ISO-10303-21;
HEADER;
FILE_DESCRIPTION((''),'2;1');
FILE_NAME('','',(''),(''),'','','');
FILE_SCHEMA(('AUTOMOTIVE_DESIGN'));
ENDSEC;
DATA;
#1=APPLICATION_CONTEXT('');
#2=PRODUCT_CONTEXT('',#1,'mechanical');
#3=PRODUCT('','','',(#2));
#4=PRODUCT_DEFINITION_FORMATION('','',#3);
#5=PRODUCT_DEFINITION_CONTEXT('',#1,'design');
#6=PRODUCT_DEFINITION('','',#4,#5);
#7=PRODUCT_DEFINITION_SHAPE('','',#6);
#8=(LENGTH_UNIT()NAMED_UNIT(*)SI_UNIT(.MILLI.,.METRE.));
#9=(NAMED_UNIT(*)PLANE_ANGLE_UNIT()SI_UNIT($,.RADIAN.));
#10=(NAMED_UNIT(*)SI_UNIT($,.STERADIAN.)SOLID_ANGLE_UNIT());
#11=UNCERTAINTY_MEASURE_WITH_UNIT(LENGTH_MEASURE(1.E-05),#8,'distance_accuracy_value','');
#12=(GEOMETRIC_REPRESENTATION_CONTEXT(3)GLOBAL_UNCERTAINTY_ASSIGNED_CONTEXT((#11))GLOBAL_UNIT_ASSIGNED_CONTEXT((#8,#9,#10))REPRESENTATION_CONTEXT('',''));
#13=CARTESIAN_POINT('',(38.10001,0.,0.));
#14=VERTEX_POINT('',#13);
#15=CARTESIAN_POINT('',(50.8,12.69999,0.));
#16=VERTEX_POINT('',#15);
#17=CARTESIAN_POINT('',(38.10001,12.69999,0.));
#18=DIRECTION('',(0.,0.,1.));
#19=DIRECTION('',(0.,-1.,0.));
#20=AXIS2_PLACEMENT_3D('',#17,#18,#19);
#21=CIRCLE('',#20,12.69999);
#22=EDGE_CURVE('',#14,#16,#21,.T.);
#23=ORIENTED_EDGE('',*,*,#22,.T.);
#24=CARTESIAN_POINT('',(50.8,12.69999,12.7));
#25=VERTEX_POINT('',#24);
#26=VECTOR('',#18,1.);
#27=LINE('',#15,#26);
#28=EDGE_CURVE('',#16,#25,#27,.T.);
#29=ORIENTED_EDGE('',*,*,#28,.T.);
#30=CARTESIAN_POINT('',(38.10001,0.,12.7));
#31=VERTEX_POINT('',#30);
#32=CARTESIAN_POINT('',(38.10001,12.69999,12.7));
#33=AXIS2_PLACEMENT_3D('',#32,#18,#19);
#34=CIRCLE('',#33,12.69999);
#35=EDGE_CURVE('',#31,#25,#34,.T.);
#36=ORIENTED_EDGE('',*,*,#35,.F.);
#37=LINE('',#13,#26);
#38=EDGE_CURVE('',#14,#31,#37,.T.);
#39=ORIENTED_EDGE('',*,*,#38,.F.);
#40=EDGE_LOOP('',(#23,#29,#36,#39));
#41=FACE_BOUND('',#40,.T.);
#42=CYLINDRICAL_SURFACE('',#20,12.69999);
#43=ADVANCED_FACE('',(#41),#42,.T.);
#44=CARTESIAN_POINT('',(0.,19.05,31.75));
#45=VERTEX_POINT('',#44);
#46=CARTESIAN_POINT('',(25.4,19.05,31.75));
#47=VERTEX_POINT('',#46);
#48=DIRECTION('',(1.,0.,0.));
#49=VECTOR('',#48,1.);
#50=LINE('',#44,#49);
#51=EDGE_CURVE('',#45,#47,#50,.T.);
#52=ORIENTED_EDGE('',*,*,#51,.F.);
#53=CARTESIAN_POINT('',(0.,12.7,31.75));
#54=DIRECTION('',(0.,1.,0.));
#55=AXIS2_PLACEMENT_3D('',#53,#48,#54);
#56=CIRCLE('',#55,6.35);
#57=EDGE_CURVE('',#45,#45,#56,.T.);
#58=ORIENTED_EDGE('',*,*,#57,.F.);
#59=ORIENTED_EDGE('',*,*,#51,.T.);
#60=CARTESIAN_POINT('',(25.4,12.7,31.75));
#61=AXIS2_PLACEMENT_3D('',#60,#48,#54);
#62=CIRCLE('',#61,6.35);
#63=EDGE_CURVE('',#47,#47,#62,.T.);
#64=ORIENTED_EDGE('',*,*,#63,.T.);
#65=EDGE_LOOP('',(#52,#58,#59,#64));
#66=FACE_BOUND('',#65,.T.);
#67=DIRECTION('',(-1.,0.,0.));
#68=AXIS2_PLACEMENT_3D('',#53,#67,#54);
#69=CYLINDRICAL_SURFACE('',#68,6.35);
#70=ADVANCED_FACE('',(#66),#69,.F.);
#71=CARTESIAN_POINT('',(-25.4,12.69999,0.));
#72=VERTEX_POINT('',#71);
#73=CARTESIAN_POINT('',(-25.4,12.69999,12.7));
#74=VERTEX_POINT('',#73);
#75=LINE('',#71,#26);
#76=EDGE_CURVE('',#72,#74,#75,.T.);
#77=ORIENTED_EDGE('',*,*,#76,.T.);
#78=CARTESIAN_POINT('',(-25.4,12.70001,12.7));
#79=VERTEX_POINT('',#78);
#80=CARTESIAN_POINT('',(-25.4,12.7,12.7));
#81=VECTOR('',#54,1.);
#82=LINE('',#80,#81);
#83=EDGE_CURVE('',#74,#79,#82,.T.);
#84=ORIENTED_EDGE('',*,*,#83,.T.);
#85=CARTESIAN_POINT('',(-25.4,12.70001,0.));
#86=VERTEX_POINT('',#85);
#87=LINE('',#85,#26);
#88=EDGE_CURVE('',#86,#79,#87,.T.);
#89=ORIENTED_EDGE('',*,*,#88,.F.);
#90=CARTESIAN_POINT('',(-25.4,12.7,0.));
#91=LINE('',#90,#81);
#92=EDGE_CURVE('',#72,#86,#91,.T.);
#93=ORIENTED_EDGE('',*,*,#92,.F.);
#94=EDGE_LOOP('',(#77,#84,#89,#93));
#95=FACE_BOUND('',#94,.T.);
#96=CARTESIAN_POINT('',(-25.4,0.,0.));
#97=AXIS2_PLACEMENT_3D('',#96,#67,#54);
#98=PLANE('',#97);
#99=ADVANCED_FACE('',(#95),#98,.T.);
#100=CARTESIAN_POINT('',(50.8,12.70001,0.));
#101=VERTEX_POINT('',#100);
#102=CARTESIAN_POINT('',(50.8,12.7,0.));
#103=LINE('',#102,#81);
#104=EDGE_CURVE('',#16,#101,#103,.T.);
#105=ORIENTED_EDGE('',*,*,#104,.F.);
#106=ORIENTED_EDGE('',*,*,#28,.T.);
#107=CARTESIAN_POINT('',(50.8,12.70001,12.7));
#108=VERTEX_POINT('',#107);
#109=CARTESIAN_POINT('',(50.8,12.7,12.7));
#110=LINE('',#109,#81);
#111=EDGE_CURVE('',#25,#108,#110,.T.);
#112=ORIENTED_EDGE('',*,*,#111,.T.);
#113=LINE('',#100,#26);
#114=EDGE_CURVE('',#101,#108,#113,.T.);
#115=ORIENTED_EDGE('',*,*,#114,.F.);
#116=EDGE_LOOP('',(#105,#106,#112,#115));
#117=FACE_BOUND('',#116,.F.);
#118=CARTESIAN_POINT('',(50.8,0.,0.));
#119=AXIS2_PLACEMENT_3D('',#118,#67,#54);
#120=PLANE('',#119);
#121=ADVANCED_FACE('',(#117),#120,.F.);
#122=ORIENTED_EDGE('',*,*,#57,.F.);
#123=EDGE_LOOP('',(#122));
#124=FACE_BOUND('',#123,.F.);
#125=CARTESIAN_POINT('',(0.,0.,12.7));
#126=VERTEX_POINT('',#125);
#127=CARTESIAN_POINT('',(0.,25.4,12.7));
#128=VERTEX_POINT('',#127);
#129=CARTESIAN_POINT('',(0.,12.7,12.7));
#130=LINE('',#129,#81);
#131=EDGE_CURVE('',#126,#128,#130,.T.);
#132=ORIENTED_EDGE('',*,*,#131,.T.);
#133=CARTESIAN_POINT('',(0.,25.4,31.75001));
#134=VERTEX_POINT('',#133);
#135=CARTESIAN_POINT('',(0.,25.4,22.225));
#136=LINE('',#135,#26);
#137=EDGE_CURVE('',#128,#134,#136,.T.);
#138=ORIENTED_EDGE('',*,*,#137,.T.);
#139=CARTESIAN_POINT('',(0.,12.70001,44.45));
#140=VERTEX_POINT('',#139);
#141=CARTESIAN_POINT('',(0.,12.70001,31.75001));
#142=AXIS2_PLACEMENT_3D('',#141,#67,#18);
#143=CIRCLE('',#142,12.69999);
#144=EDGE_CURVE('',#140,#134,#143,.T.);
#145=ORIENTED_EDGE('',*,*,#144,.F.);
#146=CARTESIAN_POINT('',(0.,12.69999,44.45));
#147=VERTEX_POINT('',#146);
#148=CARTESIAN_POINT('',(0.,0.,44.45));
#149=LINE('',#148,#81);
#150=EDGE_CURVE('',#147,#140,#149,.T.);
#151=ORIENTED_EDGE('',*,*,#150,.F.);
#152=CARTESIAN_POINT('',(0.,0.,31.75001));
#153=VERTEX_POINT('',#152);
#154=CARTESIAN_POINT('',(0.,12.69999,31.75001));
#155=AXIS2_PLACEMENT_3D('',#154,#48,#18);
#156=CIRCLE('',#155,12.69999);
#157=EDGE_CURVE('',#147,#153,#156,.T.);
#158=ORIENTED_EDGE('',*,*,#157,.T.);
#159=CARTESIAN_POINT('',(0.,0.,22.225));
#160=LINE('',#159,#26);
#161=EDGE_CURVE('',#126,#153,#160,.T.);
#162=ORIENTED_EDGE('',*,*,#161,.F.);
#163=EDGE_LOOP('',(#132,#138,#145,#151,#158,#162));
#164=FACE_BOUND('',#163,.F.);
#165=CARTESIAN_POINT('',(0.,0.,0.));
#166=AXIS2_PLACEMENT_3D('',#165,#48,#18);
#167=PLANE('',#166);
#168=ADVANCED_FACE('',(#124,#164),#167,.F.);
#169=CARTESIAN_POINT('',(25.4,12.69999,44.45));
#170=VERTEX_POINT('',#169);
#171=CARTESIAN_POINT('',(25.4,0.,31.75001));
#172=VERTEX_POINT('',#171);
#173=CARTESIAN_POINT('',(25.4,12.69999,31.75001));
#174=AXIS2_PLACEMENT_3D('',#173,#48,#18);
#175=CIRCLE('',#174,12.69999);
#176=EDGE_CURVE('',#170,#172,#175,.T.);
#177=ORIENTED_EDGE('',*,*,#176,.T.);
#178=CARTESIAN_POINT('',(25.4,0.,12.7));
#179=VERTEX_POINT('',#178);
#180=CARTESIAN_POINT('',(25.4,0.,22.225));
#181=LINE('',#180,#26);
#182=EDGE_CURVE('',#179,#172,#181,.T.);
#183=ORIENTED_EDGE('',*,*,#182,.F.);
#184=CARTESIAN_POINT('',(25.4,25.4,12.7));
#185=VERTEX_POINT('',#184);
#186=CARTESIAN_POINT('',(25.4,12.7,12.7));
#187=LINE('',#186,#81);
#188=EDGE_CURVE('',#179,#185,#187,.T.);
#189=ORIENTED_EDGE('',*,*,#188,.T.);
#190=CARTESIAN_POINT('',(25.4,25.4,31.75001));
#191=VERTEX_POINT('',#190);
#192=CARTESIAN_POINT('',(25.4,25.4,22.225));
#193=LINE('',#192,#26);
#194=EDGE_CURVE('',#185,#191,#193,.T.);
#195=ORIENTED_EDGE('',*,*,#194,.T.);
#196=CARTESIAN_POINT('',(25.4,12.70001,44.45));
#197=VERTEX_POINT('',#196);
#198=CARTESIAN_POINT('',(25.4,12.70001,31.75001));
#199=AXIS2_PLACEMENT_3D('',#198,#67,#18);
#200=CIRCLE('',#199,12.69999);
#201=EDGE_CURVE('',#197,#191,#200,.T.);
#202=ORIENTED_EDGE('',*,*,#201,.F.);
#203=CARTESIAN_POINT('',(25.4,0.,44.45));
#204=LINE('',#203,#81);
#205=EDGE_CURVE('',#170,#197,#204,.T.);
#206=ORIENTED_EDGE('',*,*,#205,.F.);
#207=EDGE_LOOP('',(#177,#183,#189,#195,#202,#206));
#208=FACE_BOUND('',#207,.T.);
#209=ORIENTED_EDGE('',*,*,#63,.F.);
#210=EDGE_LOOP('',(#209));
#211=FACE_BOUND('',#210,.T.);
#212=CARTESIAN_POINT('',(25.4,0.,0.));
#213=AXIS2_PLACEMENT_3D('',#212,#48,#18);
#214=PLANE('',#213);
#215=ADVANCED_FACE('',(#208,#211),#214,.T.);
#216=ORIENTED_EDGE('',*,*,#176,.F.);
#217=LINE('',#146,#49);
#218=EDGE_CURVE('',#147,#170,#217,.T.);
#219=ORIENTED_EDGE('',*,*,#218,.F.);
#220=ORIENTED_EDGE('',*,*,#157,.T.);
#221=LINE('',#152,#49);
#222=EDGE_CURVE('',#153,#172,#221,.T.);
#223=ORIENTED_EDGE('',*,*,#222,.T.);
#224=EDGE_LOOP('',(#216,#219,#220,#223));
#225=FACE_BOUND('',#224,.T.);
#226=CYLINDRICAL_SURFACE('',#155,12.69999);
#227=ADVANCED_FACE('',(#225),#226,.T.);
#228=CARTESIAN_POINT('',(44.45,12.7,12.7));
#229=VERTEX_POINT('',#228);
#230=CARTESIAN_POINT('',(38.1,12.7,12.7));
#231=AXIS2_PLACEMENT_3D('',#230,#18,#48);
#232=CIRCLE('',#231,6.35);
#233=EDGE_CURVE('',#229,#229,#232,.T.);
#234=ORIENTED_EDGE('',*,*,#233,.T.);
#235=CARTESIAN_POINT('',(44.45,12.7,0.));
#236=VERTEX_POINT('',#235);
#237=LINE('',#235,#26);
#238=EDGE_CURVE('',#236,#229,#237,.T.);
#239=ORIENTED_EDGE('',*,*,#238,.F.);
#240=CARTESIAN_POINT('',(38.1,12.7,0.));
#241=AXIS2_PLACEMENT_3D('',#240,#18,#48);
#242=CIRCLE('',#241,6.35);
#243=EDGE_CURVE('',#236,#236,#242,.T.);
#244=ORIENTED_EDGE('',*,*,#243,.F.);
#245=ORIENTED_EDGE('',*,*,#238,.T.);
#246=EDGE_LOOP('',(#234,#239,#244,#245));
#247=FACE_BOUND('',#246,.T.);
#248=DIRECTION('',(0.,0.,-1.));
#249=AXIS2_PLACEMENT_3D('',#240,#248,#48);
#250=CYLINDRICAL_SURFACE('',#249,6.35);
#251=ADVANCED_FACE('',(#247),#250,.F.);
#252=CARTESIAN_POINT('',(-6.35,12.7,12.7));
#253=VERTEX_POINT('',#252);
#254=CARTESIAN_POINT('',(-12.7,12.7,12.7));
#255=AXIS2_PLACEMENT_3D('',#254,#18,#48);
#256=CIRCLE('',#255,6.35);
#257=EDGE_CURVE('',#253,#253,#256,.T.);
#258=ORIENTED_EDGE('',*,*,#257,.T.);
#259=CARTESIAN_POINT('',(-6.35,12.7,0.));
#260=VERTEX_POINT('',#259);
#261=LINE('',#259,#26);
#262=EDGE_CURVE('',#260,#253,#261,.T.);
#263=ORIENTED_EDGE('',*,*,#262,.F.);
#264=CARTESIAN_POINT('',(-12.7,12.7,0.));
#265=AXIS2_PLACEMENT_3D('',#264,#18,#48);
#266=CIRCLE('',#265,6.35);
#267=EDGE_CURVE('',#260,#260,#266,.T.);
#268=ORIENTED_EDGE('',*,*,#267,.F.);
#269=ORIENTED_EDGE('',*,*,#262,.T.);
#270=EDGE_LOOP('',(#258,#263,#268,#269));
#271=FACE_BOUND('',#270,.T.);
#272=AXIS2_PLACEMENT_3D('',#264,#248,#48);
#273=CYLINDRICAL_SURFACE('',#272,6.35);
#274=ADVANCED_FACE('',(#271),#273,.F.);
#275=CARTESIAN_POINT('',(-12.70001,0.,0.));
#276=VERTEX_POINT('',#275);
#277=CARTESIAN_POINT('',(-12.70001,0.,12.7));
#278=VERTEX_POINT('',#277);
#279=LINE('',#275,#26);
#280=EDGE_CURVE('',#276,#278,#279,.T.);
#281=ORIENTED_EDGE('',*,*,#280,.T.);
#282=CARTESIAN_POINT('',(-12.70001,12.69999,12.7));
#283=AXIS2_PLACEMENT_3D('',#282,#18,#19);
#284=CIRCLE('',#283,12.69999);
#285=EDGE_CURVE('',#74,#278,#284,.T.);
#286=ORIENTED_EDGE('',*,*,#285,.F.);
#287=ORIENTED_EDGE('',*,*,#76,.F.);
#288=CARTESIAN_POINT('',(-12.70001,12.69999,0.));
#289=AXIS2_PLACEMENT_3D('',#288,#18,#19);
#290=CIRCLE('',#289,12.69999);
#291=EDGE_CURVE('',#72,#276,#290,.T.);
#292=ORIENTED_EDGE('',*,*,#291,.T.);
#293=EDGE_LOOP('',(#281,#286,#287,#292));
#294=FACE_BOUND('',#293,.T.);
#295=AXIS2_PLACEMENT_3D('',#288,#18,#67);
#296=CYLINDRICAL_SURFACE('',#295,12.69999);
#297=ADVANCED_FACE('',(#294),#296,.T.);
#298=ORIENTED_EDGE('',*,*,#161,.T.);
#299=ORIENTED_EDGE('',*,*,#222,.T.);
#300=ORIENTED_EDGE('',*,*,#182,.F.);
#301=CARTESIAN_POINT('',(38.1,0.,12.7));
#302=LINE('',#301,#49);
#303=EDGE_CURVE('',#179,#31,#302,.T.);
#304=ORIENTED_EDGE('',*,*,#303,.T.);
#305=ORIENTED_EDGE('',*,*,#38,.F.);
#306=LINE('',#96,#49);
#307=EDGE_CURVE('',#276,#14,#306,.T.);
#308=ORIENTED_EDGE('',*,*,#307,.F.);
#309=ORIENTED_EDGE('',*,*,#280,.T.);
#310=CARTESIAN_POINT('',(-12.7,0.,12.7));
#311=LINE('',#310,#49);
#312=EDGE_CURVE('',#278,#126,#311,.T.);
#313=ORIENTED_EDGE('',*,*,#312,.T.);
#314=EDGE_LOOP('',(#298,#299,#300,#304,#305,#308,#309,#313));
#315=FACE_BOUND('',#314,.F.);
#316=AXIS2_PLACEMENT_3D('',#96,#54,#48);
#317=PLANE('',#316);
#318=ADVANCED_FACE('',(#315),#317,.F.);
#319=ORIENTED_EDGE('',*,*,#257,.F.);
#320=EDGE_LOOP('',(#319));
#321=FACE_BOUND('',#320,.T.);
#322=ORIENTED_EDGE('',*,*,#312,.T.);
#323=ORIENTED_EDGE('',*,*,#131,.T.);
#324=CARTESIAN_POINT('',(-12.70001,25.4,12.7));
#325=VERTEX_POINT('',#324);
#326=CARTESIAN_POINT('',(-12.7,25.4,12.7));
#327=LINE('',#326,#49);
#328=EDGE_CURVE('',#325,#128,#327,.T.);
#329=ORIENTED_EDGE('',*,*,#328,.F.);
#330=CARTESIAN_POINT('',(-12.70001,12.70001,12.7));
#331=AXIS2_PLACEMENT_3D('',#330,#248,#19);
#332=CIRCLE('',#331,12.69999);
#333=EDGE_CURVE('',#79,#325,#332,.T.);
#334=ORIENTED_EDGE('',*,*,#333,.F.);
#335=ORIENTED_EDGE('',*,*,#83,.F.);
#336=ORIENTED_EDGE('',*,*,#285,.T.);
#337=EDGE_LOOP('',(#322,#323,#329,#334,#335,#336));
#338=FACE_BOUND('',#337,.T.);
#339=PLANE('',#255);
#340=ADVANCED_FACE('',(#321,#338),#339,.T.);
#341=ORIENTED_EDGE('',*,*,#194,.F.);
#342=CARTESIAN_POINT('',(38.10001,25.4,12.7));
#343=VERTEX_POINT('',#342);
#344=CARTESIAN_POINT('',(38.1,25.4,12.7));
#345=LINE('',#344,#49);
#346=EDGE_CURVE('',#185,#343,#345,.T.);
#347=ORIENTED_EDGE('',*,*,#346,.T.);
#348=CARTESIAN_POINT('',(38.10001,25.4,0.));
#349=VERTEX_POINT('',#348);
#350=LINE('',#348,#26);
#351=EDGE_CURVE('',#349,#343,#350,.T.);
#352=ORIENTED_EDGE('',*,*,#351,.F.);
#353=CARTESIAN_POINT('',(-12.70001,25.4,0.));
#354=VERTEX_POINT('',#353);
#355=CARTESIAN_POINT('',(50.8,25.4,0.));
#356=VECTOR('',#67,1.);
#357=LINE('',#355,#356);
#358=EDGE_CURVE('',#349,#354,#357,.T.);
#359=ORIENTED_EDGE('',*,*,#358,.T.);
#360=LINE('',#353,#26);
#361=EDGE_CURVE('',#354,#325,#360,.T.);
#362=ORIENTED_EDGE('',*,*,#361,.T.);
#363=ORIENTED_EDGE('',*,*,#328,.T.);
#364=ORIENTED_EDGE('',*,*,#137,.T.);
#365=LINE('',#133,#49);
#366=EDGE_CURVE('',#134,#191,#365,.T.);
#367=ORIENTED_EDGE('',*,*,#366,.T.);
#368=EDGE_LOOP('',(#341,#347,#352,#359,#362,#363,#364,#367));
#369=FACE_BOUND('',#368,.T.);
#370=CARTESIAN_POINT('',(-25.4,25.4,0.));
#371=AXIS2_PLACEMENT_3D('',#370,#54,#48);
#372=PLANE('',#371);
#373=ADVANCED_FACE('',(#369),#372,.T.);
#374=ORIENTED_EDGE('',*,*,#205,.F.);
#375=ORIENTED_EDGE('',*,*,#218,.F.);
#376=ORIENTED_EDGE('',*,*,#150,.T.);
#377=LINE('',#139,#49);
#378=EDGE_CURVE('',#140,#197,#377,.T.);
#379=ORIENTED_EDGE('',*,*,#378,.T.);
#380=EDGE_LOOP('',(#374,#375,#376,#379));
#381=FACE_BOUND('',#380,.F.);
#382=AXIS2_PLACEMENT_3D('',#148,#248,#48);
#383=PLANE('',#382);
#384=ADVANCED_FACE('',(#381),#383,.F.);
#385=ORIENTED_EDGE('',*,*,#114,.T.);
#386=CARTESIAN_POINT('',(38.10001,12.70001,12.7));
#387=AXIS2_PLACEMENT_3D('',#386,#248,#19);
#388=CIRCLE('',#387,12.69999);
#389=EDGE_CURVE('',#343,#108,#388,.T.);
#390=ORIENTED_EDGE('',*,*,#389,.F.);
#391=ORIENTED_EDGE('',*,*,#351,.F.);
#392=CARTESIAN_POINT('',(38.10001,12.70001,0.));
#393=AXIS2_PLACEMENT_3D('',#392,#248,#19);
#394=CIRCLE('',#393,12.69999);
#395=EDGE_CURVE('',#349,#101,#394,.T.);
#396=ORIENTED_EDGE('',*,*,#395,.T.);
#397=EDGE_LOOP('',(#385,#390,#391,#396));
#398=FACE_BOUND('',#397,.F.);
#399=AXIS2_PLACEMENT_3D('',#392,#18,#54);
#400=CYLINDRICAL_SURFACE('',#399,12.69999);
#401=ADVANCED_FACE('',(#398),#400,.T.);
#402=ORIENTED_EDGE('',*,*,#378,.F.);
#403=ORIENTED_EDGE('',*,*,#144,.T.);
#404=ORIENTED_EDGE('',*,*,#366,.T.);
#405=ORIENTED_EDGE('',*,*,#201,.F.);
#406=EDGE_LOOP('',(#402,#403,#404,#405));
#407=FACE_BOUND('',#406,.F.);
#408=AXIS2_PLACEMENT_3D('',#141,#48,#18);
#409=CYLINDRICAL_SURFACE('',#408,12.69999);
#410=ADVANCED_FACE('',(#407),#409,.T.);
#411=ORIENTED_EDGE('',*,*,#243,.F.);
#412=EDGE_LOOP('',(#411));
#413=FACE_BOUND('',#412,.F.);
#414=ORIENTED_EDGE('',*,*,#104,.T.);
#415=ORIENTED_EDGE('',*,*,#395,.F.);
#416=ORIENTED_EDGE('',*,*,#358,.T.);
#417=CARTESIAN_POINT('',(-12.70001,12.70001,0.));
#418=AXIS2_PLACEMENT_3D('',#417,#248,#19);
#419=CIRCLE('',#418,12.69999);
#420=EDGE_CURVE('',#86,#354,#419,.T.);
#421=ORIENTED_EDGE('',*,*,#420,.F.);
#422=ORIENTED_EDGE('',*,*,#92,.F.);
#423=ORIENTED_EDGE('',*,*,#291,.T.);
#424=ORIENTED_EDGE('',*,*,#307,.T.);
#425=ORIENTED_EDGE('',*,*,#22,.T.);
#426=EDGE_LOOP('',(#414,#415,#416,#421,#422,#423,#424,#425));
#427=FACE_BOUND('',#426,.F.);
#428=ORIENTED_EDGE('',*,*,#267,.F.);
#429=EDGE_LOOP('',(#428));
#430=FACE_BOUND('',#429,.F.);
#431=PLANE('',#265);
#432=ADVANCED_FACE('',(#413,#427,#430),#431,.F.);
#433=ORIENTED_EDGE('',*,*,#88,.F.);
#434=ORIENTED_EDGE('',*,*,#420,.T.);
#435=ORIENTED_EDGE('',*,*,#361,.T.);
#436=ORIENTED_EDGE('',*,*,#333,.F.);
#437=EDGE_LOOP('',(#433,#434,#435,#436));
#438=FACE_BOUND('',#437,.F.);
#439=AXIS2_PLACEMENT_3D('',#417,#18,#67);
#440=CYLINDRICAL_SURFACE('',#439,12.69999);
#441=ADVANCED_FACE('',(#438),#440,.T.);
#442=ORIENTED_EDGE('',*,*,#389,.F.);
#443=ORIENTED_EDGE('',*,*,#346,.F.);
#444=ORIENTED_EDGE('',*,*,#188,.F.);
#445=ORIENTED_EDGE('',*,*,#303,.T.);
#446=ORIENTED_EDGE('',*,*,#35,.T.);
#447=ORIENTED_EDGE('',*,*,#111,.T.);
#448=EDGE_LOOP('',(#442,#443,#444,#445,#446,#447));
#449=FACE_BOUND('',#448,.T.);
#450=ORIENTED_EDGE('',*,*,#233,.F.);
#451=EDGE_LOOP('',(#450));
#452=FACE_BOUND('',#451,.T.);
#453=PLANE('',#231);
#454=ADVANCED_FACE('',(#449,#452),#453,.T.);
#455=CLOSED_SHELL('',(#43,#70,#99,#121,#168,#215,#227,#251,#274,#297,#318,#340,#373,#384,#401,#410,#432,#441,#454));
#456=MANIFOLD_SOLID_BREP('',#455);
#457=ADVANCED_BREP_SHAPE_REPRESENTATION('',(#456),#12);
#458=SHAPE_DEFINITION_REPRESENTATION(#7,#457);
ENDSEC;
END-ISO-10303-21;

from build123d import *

# Parameters (mm, degrees)
F0_W      = 25.4
F0_H      = 44.45
F1_DEPTH  = 25.4
F2_R      = 12.69999
F4_R      = 6.35
F5_DEPTH  = 25.4
F6_W      = 25.4
F6_H      = 25.4
F7_DEPTH  = 12.7
F8_R      = 12.69999
F9_R      = 12.69999
F10_R     = 6.35
F11_DEPTH = 12.7
F12_R     = 6.35
F13_DEPTH = 12.7


# Not quite as in the source:
# - a fillet or chamfer is up to 0.001 mm smaller than in the source, because OpenCascade refuses the exact size


with BuildPart() as f1:
    # F0 (on Front) → F1 (new body)
    with BuildSketch(Plane.XZ):
        with Locations((12.7, 22.225)):
            Rectangle(F0_W, F0_H)
    extrude(amount=-F1_DEPTH)

    # F2 (radius 12.7 in the source; OpenCascade refuses exactly that, so slightly less here)
    f2_edges = [f1.edges().sort_by_distance(p)[0] for p in [
        (12.7, 0, 44.45),
        (12.7, 25.4, 44.45),
    ]]
    fillet(f2_edges, radius=F2_R)

    # F4 (on Right) → F5 (cut)
    with BuildSketch(Plane.YZ):
        with Locations((12.7, 31.75)):
            Circle(F4_R)
    extrude(amount=F5_DEPTH, mode=Mode.SUBTRACT)

    # F6 (on Top) → F7 (join)
    with BuildSketch(Plane.XY):
        with Locations((-12.7, 12.7)):
            Rectangle(F6_W, F6_H)
        with Locations((38.1, 12.7)):
            Rectangle(F6_W, F6_H)
    extrude(amount=F7_DEPTH)

    # F8 (radius 12.7 in the source; OpenCascade refuses exactly that, so slightly less here)
    f8_edges = [f1.edges().sort_by_distance(p)[0] for p in [
        (-25.4, 25.4, 6.35),
        (-25.4, 0, 6.35),
    ]]
    fillet(f8_edges, radius=F8_R)

    # F9 (radius 12.7 in the source; OpenCascade refuses exactly that, so slightly less here)
    f9_edges = [f1.edges().sort_by_distance(p)[0] for p in [
        (50.8, 0, 6.35),
        (50.8, 25.4, 6.35),
    ]]
    fillet(f9_edges, radius=F9_R)

    # F10 (on Top) → F11 (cut)
    with BuildSketch(Plane.XY):
        with Locations((-12.7, 12.7)):
            Circle(F10_R)
    extrude(amount=F11_DEPTH, mode=Mode.SUBTRACT)

    # F12 (on Top) → F13 (cut)
    with BuildSketch(Plane.XY):
        with Locations((38.1, 12.7)):
            Circle(F12_R)
    extrude(amount=F13_DEPTH, mode=Mode.SUBTRACT)


solid = f1.part
